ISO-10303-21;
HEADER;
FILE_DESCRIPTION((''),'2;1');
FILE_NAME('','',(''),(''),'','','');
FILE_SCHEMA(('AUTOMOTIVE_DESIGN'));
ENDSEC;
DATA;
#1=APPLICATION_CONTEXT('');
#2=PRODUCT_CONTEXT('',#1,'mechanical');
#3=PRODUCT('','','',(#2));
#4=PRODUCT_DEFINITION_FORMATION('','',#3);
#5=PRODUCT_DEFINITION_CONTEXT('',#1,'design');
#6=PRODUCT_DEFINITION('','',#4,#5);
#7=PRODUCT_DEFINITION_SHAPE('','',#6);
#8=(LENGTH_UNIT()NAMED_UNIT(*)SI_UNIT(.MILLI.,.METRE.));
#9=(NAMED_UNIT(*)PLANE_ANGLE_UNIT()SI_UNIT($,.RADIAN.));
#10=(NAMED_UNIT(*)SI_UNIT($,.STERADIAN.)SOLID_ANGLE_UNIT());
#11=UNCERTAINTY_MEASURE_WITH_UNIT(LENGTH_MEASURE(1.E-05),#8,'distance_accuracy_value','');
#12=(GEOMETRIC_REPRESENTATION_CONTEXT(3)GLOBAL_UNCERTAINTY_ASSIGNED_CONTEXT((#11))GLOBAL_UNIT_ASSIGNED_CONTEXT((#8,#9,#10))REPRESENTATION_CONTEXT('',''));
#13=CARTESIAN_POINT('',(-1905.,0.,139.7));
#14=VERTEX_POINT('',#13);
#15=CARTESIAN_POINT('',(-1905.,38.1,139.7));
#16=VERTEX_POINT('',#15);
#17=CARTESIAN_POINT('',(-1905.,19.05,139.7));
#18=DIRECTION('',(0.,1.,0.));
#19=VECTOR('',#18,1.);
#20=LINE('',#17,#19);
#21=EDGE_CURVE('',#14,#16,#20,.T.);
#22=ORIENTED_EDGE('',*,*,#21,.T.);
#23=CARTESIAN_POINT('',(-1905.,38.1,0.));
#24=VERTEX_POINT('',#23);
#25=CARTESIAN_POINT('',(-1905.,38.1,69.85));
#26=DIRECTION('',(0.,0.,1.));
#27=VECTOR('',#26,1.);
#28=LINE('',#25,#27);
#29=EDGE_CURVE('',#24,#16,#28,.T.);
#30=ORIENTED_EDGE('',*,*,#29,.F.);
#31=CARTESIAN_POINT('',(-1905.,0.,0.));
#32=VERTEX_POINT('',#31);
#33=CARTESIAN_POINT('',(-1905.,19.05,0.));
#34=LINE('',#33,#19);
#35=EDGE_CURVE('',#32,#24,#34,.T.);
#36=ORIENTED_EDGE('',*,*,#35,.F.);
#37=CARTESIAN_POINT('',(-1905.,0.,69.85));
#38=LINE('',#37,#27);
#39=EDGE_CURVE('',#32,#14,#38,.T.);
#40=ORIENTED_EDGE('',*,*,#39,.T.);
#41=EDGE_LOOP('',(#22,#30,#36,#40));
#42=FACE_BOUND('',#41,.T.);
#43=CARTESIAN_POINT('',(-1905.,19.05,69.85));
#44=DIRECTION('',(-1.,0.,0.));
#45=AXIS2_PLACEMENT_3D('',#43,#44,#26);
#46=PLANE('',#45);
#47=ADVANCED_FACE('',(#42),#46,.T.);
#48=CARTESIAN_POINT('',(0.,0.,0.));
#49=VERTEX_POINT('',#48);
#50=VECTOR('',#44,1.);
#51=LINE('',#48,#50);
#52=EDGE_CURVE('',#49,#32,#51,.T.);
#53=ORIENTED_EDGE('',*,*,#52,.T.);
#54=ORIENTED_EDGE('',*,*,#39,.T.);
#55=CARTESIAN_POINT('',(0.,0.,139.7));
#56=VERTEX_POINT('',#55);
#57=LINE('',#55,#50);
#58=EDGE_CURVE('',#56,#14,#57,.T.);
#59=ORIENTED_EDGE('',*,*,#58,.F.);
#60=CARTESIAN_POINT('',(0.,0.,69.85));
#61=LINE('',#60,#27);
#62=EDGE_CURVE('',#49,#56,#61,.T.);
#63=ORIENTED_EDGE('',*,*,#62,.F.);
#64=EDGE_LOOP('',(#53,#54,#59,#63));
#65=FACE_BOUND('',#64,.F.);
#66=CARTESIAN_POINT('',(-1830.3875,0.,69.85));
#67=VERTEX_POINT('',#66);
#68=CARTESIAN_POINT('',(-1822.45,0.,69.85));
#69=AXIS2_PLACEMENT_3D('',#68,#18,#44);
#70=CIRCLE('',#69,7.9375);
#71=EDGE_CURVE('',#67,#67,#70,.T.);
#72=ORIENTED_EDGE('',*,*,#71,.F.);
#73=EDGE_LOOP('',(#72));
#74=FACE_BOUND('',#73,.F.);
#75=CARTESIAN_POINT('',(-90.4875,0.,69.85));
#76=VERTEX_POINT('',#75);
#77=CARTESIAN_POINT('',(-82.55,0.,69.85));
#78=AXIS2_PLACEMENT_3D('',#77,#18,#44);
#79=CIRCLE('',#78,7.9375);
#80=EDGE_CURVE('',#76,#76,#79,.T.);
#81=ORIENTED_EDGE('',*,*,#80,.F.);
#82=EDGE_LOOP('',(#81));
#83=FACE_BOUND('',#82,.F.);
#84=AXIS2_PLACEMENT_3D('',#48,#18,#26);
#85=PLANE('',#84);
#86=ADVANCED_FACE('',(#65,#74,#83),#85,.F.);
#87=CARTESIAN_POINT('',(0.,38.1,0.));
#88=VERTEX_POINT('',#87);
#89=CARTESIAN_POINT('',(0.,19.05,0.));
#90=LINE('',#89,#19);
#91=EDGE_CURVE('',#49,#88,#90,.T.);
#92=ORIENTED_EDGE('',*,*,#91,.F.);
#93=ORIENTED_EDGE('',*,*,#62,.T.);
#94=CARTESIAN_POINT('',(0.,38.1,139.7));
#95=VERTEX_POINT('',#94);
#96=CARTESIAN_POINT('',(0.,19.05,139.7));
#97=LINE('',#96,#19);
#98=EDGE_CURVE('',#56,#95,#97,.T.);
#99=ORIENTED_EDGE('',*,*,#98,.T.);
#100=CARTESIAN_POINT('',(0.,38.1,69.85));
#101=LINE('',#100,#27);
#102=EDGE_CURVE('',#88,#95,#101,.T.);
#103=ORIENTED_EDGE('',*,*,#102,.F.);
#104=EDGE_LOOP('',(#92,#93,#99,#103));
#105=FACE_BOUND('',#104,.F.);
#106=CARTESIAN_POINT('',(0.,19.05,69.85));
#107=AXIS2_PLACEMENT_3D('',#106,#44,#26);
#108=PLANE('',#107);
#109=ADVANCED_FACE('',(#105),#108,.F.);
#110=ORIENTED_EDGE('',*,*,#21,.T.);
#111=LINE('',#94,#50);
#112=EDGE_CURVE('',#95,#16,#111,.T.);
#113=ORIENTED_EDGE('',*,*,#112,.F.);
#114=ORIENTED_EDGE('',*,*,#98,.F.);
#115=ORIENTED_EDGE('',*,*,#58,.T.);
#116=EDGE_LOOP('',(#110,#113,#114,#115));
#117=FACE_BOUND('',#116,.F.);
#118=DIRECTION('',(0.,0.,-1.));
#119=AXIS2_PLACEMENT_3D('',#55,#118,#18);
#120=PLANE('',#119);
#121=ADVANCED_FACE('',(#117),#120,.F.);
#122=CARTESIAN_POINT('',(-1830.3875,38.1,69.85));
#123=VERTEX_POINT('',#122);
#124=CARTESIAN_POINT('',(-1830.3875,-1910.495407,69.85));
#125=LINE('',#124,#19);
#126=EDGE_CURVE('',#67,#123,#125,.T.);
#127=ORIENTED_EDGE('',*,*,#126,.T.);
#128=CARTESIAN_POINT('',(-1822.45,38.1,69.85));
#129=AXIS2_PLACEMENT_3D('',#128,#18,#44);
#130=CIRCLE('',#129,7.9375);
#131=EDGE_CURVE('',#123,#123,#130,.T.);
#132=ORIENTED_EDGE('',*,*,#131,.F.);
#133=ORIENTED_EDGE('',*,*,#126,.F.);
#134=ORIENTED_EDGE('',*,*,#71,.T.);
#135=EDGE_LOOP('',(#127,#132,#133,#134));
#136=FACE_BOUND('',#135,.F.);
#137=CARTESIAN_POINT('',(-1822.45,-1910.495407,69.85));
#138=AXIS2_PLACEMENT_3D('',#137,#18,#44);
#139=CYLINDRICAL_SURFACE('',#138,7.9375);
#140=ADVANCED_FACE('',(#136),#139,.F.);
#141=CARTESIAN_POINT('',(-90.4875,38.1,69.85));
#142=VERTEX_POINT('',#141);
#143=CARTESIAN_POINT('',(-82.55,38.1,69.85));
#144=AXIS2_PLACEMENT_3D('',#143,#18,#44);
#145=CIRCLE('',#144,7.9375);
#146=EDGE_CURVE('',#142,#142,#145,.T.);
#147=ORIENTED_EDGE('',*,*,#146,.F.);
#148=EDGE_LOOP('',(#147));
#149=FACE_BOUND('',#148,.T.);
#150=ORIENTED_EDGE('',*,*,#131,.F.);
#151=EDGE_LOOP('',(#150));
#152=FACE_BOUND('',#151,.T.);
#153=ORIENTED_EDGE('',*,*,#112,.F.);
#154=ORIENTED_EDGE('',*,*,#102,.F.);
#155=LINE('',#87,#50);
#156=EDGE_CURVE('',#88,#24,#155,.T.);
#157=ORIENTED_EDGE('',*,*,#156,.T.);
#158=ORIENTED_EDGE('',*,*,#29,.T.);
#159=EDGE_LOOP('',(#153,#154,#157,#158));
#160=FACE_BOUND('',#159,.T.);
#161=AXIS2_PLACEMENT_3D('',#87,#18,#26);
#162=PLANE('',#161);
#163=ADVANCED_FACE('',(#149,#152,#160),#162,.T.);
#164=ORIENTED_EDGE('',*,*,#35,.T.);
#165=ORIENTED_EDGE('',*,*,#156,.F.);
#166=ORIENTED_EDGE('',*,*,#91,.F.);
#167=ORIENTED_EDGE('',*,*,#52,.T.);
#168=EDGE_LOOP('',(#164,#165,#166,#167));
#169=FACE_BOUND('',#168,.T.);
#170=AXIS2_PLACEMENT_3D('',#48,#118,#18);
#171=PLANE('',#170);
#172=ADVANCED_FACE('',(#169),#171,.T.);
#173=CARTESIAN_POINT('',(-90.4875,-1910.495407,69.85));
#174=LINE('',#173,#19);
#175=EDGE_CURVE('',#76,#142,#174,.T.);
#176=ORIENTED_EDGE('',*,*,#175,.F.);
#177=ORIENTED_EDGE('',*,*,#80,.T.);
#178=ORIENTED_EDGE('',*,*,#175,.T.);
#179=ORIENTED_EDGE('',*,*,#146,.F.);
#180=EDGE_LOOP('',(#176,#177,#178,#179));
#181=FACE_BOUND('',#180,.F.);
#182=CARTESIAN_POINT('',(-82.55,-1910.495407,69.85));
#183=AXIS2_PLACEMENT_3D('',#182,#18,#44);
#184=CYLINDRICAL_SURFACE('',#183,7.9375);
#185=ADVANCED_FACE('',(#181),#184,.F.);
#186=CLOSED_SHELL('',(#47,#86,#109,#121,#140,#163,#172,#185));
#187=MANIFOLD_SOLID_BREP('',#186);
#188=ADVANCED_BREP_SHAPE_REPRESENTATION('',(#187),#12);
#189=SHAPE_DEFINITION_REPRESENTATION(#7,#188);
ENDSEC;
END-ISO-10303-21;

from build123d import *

# Parameters (mm, degrees)
F0_W     = 139.7
F0_H     = 38.1
F1_DEPTH = 1905
F2_ANGLE = 90
F4_D     = 15.875


with BuildPart() as f1:
    # F0 (on Top) → F1 (new body)
    with BuildSketch(Plane.XY):
        with Locations((69.85, 19.05)):
            Rectangle(F0_W, F0_H)
    extrude(amount=F1_DEPTH)


with BuildPart() as f1_1:
    # F2: moved
    add(f1.part.rotate(Axis((0, 19.05, 0), (0, -1, 0)), F2_ANGLE))

    # F4 (through all)
    with Locations(Plane.XZ):
        with Locations((-82.55, 69.85), (-1822.45, 69.85)):
            Hole(F4_D / 2)


solid = f1_1.part
